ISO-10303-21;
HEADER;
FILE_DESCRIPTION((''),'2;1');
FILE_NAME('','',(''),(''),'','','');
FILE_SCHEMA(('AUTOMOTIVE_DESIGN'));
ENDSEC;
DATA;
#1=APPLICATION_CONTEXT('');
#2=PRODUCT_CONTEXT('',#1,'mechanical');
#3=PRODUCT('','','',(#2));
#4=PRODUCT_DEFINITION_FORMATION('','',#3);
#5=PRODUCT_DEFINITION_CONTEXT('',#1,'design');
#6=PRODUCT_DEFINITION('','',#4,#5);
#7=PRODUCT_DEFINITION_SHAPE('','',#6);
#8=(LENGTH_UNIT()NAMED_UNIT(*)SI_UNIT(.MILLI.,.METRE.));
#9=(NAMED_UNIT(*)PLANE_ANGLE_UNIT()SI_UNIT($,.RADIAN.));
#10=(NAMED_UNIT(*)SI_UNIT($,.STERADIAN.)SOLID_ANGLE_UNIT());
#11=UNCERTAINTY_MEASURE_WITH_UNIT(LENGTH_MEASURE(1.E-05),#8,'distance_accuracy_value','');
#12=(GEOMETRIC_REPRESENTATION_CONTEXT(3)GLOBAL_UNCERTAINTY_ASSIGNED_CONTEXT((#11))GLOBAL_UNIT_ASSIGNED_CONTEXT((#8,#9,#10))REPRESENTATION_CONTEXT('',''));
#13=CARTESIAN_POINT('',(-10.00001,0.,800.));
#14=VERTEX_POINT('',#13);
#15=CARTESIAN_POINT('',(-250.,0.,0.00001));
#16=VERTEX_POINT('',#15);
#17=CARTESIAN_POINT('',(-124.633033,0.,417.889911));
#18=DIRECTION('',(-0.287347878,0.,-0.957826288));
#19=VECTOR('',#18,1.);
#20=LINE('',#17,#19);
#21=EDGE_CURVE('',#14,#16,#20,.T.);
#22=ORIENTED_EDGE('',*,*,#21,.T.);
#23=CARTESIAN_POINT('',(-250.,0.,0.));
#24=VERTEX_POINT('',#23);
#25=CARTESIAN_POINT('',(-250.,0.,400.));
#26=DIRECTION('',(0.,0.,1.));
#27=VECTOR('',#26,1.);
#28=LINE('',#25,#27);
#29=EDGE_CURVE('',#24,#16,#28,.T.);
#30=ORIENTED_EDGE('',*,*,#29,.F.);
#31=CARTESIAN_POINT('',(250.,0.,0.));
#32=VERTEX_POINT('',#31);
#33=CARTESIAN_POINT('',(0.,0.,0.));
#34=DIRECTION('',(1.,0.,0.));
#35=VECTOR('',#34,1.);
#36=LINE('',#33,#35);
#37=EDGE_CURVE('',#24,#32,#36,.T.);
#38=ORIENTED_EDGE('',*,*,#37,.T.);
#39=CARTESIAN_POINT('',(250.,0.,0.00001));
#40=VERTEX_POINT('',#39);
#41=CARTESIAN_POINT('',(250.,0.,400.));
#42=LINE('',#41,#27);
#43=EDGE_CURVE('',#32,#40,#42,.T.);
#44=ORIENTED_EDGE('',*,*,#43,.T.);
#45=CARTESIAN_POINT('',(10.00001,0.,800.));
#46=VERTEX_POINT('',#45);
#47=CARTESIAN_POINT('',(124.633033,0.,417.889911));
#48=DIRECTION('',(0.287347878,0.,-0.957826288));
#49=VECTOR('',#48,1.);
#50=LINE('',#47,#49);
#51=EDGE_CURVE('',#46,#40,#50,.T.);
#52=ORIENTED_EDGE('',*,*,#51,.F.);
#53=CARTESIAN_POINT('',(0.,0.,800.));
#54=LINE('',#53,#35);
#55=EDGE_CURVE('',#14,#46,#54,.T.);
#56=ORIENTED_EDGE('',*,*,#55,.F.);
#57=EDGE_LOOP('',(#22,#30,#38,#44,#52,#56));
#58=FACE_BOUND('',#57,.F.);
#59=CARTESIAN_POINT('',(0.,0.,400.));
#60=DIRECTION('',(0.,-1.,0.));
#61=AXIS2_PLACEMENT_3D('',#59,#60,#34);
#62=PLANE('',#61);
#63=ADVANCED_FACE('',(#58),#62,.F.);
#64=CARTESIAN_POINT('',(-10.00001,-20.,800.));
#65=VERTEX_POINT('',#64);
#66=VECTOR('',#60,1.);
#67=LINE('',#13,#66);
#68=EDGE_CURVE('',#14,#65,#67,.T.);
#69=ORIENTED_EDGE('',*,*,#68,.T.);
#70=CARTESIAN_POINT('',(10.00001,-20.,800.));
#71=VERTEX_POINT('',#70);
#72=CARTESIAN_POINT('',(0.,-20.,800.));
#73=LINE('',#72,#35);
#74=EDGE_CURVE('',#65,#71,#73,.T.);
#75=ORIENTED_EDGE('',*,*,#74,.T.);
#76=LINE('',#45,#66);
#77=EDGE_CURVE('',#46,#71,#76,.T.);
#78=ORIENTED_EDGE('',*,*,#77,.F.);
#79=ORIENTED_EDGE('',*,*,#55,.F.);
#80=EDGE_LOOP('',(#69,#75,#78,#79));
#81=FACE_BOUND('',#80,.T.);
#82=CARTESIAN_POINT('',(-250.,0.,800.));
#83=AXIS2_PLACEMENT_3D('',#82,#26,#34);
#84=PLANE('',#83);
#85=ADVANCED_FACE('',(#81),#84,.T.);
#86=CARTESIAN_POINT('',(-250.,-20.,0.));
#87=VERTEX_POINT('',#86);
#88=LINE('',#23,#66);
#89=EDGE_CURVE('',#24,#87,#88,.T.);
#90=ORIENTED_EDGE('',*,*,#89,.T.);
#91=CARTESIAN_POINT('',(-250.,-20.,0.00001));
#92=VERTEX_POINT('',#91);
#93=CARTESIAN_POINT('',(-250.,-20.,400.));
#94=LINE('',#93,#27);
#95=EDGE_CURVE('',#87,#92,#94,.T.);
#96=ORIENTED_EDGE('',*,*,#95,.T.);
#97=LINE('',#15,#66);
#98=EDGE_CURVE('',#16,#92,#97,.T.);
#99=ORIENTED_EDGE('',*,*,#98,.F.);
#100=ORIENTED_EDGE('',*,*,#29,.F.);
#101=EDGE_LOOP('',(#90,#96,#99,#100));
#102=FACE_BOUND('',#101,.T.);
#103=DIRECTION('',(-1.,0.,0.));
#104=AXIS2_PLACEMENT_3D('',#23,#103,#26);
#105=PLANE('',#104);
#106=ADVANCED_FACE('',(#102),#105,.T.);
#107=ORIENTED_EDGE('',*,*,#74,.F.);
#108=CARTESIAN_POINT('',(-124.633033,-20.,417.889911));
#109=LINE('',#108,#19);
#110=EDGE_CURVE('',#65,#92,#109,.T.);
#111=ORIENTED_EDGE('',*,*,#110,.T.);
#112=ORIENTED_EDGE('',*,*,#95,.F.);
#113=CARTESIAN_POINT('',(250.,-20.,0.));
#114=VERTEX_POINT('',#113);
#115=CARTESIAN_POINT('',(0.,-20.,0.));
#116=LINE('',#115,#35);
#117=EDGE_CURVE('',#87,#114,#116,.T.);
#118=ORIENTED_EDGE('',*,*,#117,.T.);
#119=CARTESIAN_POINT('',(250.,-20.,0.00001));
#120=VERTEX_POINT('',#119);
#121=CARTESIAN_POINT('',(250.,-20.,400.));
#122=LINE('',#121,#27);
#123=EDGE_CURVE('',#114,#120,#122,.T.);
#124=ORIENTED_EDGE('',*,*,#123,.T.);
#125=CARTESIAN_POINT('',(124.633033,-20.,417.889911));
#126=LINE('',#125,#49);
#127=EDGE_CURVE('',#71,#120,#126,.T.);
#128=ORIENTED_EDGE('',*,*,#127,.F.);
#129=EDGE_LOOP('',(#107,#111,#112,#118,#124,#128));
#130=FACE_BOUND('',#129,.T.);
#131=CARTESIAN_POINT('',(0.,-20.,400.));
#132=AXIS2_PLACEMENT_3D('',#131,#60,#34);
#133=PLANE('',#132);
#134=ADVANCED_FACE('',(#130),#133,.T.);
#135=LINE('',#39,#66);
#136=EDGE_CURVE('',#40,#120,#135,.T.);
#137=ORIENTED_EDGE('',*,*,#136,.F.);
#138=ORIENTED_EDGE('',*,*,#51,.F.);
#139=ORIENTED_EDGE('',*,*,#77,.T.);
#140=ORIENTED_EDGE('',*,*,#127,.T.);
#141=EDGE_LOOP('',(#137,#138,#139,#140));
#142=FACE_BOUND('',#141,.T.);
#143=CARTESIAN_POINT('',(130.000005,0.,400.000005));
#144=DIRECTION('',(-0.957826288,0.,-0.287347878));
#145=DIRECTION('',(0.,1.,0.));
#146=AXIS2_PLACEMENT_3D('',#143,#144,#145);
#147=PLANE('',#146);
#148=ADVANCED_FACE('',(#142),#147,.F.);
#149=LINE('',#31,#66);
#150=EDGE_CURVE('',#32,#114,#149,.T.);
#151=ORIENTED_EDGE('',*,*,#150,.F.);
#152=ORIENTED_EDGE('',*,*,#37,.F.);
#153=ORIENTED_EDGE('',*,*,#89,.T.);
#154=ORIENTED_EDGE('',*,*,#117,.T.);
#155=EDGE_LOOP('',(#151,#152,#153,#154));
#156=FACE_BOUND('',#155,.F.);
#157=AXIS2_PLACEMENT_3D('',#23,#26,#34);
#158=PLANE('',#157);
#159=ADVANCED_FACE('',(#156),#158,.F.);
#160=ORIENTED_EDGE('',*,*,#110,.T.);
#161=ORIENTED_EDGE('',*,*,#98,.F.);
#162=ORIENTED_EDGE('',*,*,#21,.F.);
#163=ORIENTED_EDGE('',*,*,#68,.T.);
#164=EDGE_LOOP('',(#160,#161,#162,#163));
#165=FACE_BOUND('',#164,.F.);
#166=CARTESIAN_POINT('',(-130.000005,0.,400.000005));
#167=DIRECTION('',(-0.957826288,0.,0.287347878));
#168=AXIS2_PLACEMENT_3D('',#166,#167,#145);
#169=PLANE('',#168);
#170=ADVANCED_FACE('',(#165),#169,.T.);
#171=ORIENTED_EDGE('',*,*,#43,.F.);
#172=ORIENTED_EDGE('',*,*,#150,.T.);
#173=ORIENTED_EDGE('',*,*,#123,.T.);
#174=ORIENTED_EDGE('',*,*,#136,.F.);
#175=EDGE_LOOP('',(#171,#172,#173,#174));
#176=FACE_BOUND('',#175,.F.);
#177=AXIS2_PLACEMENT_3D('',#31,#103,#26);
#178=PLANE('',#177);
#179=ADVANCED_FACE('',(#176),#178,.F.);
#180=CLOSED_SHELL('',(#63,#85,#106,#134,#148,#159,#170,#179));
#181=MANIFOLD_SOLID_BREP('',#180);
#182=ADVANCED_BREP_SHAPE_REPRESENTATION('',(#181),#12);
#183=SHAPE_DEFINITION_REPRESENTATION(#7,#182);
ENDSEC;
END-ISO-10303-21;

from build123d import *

# Parameters (mm, degrees)
F2_W     = 500
F2_H     = 800
F3_DEPTH = 20
F4_SIZE2 = 799.99999
F4_SIZE  = 239.99999


# Not quite as in the source:
# - a fillet or chamfer is up to 0.001 mm smaller than in the source, because OpenCascade refuses the exact size


with BuildPart() as f3:
    # F2 (on Front) → F3 (new body)
    with BuildSketch(Plane.XZ):
        with Locations((0, 400)):
            Rectangle(F2_W, F2_H)
    extrude(amount=F3_DEPTH)

    # F4 (size 240 and 800 in the source; OpenCascade refuses exactly that, so slightly less here)
    f4_edges = [f3.edges().sort_by_distance(p)[0] for p in [
        (250, -10, 800),
        (-250, -10, 800),
    ]]
    f4_side = f3.faces().sort_by_distance((0, -10, 800))[0]
    chamfer(f4_edges, length=F4_SIZE, length2=F4_SIZE2, reference=f4_side)


solid = f3.part
